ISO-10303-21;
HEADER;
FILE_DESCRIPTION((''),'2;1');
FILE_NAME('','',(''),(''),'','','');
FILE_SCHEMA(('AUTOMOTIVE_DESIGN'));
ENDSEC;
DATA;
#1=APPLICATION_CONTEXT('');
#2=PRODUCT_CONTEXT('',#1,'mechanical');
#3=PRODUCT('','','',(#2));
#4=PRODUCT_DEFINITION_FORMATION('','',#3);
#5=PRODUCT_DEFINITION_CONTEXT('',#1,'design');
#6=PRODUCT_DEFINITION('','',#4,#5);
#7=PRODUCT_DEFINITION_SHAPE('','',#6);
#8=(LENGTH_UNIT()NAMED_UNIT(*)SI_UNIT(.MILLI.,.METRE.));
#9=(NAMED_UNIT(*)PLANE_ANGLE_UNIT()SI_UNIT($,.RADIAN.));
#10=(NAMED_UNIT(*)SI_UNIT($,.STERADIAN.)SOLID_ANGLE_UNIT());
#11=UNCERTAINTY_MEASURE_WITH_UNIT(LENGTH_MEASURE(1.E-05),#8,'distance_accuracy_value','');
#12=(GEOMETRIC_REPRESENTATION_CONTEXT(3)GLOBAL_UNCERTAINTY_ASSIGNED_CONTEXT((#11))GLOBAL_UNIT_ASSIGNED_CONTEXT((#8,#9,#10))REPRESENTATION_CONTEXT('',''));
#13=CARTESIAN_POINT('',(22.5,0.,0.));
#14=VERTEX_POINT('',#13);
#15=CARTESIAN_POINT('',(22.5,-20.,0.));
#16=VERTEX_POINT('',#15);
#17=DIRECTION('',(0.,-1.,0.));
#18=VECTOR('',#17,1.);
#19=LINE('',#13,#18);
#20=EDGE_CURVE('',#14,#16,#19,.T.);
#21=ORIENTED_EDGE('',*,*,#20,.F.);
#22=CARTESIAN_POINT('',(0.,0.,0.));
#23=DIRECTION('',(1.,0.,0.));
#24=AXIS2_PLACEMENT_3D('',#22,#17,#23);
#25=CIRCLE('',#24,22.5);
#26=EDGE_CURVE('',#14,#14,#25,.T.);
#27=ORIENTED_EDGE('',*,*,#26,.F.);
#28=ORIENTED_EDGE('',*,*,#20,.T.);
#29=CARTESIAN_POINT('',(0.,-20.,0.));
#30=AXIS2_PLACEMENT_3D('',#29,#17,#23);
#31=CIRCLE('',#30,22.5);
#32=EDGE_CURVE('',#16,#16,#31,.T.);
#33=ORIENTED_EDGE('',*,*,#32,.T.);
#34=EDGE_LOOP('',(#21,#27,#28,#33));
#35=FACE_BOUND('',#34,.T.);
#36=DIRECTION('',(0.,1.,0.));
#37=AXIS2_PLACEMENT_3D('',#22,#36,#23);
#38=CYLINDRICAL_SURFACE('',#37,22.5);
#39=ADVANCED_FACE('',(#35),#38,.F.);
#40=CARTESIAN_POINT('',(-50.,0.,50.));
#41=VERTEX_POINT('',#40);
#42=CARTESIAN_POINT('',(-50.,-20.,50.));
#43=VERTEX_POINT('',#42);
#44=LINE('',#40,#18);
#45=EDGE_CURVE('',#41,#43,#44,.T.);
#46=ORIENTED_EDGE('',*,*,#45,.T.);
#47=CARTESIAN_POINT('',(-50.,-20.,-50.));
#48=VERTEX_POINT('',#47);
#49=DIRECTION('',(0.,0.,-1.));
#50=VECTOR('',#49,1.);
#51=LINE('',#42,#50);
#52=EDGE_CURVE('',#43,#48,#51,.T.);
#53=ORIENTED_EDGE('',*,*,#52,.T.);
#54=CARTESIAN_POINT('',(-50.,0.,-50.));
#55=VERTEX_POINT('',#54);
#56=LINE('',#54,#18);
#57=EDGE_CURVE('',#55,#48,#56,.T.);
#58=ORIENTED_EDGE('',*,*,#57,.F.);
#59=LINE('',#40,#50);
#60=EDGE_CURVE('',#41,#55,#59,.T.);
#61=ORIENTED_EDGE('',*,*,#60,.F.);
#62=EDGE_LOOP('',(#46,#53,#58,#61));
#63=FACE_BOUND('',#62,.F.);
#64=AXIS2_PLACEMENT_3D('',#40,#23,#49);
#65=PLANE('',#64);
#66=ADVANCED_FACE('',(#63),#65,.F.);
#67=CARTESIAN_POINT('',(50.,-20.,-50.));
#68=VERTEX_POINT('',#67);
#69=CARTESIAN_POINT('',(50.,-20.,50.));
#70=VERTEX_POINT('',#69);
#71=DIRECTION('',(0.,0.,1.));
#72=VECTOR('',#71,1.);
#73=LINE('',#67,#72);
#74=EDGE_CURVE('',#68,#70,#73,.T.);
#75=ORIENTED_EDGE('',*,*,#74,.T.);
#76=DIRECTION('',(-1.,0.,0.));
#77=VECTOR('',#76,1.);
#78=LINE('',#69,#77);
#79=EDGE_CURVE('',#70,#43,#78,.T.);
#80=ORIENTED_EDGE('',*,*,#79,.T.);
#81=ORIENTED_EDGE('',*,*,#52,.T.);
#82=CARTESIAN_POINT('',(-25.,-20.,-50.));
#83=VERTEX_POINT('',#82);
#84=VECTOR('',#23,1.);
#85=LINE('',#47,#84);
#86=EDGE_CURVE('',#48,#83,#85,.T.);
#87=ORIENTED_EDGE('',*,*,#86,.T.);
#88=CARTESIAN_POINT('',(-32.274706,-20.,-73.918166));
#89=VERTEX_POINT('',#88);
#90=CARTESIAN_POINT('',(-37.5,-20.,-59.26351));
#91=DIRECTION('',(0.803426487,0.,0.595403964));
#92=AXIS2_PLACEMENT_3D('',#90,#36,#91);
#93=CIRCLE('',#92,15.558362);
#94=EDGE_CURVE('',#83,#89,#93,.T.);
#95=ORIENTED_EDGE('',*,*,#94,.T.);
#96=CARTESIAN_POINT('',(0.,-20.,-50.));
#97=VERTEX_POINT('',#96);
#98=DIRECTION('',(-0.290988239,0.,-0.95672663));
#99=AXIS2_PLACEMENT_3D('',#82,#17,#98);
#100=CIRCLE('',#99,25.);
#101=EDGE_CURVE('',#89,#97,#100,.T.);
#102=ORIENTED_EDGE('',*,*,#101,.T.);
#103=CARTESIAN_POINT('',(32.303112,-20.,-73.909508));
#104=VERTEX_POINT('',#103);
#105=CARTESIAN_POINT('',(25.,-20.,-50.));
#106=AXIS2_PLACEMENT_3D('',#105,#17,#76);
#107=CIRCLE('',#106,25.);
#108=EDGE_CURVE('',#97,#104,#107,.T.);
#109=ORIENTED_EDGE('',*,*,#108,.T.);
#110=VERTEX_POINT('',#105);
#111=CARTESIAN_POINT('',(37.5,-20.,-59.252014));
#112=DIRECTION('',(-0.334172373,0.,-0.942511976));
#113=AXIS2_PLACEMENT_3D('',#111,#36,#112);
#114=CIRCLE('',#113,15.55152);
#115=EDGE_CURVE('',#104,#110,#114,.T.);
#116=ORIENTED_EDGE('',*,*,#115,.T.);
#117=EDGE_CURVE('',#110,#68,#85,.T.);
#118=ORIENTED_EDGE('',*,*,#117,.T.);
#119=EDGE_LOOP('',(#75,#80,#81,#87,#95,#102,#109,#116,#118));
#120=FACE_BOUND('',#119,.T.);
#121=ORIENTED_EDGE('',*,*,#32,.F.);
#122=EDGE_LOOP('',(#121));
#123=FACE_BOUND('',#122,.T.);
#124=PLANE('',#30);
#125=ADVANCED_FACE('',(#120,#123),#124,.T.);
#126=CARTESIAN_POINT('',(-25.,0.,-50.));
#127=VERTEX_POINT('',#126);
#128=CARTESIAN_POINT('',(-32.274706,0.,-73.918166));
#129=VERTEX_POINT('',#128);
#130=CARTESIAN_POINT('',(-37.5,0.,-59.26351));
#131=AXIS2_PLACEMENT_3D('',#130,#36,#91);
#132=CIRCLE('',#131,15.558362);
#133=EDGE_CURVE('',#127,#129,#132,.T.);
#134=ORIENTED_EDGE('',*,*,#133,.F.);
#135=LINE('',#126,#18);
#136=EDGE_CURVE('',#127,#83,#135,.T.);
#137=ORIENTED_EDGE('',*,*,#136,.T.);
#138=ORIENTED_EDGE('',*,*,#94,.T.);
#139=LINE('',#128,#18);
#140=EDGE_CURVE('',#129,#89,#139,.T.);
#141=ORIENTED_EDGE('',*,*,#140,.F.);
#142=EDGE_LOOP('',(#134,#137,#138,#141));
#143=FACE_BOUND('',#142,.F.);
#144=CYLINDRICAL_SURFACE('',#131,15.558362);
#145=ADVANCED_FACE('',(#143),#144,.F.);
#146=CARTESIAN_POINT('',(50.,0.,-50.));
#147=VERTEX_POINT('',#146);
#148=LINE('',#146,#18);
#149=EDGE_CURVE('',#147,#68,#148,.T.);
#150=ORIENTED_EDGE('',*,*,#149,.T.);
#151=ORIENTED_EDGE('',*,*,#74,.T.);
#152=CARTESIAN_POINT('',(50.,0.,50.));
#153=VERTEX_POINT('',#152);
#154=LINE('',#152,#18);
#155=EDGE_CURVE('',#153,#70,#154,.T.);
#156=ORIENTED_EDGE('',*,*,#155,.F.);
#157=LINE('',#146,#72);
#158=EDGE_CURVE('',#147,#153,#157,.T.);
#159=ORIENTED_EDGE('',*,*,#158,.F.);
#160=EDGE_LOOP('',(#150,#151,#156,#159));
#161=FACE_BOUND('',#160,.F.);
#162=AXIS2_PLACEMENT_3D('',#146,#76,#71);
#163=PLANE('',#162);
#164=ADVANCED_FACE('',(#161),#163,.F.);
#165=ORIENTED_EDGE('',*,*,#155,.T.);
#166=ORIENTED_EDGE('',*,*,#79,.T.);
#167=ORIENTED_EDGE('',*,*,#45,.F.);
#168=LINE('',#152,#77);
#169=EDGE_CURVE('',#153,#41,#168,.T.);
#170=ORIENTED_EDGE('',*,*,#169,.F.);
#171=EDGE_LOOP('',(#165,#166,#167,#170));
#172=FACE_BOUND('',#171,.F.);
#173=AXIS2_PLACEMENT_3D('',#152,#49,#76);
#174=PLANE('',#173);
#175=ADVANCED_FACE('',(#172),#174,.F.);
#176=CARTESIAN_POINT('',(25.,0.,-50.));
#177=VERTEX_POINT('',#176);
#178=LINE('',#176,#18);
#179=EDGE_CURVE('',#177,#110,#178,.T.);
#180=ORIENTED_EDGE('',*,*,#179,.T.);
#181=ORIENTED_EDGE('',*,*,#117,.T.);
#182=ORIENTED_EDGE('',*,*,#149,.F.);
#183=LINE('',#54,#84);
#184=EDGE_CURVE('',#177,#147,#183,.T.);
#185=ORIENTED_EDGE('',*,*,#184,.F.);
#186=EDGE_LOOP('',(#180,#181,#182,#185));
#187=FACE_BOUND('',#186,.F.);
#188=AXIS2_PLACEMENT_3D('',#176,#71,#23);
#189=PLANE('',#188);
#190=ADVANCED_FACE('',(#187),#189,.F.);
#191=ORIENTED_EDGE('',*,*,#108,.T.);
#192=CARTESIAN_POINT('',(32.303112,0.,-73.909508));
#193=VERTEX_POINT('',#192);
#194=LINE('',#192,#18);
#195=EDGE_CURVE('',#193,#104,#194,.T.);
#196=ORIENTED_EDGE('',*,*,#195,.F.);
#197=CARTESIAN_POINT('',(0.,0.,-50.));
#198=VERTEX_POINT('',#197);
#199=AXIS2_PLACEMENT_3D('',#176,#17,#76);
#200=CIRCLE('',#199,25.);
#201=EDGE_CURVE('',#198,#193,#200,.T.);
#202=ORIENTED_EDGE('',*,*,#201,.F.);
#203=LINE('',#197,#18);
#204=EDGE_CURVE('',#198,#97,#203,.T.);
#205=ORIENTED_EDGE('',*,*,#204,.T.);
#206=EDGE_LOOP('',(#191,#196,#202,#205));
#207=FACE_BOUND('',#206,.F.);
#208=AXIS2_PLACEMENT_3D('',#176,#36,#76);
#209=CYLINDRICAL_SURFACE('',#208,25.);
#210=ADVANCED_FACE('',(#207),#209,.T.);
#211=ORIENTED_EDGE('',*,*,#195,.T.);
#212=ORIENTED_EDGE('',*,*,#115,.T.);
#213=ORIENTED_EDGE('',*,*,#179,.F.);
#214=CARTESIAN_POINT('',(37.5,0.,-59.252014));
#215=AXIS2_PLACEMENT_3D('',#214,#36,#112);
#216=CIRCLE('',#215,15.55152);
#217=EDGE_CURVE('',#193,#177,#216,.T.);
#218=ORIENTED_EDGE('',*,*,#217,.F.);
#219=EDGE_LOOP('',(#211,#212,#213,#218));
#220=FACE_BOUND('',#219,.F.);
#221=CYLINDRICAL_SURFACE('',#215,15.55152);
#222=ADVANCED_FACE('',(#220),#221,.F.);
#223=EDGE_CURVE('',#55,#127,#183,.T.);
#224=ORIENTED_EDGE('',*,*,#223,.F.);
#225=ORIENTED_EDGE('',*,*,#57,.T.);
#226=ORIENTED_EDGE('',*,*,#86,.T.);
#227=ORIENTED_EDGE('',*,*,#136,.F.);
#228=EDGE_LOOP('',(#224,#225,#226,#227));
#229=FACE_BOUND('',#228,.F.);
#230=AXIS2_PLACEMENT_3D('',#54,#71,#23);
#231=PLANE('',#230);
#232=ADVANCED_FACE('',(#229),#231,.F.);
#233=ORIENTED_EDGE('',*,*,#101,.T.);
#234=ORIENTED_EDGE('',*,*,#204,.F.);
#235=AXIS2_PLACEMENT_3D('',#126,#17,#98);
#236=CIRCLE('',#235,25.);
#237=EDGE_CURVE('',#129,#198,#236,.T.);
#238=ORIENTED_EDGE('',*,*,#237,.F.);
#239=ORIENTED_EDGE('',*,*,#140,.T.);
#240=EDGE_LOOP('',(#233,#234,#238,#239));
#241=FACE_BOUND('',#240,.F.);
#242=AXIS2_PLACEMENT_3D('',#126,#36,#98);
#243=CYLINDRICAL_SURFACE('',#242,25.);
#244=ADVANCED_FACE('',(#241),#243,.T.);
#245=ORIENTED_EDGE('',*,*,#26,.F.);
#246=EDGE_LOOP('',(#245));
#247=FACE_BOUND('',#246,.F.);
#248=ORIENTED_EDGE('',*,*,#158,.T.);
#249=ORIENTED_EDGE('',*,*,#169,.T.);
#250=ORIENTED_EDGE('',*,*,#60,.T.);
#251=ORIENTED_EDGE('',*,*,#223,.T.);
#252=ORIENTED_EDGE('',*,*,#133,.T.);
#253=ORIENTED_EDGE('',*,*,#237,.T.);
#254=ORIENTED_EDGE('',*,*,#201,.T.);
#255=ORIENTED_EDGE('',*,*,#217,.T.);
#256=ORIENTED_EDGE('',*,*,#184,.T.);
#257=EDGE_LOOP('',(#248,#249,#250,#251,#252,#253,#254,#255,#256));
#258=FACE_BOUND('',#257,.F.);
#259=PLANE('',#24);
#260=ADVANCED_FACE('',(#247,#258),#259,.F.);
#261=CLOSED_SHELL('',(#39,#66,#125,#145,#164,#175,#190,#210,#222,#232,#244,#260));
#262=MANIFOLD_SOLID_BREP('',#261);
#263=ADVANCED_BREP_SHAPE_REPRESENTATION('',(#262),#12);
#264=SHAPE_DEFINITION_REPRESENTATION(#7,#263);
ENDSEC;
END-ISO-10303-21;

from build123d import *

# Parameters (mm, degrees)
F0_R     = 22.5
F1_DEPTH = 20


# Not quite as in the source:
# - a feature names something its author has since deleted; it is built from what else it names


with BuildPart() as f1:
    # F0 (on Front) → F1 (new body)
    with BuildSketch(Plane.XZ):
        Polygon((37.5, 50), (-40, 50), (-50, 50), (-50, 40), (-50, -40), (-50, -41.9841893017), (-50, -50), (-40, -50), (-25, -50), (0, -50), (25, -50), (40, -50), (50, -50), (50, -41.9841893017), (50, -40), (50, 40), (50, 50), (40, 50), align=None)
        Circle(F0_R, mode=Mode.SUBTRACT)
        with BuildLine():
            ThreePointArc((-25, -50), (-22.6149008919, -63.790810636), (-32.2747059634, -73.9181657563))
            ThreePointArc((-32.2747059634, -73.9181657563), (-10.1149008919, -70.0856621634), (0, -50))
            Line((0, -50), (-25, -50))
        make_face()
        with BuildLine():
            Line((25, -50), (0, -50))
            ThreePointArc((0, -50), (10.1268327857, -70.0944991731), (32.3031117614, -73.909507703))
            ThreePointArc((32.3031117614, -73.909507703), (22.6268327857, -63.7949935854), (25, -50))
        make_face()
    extrude(amount=F1_DEPTH)


solid = f1.part
